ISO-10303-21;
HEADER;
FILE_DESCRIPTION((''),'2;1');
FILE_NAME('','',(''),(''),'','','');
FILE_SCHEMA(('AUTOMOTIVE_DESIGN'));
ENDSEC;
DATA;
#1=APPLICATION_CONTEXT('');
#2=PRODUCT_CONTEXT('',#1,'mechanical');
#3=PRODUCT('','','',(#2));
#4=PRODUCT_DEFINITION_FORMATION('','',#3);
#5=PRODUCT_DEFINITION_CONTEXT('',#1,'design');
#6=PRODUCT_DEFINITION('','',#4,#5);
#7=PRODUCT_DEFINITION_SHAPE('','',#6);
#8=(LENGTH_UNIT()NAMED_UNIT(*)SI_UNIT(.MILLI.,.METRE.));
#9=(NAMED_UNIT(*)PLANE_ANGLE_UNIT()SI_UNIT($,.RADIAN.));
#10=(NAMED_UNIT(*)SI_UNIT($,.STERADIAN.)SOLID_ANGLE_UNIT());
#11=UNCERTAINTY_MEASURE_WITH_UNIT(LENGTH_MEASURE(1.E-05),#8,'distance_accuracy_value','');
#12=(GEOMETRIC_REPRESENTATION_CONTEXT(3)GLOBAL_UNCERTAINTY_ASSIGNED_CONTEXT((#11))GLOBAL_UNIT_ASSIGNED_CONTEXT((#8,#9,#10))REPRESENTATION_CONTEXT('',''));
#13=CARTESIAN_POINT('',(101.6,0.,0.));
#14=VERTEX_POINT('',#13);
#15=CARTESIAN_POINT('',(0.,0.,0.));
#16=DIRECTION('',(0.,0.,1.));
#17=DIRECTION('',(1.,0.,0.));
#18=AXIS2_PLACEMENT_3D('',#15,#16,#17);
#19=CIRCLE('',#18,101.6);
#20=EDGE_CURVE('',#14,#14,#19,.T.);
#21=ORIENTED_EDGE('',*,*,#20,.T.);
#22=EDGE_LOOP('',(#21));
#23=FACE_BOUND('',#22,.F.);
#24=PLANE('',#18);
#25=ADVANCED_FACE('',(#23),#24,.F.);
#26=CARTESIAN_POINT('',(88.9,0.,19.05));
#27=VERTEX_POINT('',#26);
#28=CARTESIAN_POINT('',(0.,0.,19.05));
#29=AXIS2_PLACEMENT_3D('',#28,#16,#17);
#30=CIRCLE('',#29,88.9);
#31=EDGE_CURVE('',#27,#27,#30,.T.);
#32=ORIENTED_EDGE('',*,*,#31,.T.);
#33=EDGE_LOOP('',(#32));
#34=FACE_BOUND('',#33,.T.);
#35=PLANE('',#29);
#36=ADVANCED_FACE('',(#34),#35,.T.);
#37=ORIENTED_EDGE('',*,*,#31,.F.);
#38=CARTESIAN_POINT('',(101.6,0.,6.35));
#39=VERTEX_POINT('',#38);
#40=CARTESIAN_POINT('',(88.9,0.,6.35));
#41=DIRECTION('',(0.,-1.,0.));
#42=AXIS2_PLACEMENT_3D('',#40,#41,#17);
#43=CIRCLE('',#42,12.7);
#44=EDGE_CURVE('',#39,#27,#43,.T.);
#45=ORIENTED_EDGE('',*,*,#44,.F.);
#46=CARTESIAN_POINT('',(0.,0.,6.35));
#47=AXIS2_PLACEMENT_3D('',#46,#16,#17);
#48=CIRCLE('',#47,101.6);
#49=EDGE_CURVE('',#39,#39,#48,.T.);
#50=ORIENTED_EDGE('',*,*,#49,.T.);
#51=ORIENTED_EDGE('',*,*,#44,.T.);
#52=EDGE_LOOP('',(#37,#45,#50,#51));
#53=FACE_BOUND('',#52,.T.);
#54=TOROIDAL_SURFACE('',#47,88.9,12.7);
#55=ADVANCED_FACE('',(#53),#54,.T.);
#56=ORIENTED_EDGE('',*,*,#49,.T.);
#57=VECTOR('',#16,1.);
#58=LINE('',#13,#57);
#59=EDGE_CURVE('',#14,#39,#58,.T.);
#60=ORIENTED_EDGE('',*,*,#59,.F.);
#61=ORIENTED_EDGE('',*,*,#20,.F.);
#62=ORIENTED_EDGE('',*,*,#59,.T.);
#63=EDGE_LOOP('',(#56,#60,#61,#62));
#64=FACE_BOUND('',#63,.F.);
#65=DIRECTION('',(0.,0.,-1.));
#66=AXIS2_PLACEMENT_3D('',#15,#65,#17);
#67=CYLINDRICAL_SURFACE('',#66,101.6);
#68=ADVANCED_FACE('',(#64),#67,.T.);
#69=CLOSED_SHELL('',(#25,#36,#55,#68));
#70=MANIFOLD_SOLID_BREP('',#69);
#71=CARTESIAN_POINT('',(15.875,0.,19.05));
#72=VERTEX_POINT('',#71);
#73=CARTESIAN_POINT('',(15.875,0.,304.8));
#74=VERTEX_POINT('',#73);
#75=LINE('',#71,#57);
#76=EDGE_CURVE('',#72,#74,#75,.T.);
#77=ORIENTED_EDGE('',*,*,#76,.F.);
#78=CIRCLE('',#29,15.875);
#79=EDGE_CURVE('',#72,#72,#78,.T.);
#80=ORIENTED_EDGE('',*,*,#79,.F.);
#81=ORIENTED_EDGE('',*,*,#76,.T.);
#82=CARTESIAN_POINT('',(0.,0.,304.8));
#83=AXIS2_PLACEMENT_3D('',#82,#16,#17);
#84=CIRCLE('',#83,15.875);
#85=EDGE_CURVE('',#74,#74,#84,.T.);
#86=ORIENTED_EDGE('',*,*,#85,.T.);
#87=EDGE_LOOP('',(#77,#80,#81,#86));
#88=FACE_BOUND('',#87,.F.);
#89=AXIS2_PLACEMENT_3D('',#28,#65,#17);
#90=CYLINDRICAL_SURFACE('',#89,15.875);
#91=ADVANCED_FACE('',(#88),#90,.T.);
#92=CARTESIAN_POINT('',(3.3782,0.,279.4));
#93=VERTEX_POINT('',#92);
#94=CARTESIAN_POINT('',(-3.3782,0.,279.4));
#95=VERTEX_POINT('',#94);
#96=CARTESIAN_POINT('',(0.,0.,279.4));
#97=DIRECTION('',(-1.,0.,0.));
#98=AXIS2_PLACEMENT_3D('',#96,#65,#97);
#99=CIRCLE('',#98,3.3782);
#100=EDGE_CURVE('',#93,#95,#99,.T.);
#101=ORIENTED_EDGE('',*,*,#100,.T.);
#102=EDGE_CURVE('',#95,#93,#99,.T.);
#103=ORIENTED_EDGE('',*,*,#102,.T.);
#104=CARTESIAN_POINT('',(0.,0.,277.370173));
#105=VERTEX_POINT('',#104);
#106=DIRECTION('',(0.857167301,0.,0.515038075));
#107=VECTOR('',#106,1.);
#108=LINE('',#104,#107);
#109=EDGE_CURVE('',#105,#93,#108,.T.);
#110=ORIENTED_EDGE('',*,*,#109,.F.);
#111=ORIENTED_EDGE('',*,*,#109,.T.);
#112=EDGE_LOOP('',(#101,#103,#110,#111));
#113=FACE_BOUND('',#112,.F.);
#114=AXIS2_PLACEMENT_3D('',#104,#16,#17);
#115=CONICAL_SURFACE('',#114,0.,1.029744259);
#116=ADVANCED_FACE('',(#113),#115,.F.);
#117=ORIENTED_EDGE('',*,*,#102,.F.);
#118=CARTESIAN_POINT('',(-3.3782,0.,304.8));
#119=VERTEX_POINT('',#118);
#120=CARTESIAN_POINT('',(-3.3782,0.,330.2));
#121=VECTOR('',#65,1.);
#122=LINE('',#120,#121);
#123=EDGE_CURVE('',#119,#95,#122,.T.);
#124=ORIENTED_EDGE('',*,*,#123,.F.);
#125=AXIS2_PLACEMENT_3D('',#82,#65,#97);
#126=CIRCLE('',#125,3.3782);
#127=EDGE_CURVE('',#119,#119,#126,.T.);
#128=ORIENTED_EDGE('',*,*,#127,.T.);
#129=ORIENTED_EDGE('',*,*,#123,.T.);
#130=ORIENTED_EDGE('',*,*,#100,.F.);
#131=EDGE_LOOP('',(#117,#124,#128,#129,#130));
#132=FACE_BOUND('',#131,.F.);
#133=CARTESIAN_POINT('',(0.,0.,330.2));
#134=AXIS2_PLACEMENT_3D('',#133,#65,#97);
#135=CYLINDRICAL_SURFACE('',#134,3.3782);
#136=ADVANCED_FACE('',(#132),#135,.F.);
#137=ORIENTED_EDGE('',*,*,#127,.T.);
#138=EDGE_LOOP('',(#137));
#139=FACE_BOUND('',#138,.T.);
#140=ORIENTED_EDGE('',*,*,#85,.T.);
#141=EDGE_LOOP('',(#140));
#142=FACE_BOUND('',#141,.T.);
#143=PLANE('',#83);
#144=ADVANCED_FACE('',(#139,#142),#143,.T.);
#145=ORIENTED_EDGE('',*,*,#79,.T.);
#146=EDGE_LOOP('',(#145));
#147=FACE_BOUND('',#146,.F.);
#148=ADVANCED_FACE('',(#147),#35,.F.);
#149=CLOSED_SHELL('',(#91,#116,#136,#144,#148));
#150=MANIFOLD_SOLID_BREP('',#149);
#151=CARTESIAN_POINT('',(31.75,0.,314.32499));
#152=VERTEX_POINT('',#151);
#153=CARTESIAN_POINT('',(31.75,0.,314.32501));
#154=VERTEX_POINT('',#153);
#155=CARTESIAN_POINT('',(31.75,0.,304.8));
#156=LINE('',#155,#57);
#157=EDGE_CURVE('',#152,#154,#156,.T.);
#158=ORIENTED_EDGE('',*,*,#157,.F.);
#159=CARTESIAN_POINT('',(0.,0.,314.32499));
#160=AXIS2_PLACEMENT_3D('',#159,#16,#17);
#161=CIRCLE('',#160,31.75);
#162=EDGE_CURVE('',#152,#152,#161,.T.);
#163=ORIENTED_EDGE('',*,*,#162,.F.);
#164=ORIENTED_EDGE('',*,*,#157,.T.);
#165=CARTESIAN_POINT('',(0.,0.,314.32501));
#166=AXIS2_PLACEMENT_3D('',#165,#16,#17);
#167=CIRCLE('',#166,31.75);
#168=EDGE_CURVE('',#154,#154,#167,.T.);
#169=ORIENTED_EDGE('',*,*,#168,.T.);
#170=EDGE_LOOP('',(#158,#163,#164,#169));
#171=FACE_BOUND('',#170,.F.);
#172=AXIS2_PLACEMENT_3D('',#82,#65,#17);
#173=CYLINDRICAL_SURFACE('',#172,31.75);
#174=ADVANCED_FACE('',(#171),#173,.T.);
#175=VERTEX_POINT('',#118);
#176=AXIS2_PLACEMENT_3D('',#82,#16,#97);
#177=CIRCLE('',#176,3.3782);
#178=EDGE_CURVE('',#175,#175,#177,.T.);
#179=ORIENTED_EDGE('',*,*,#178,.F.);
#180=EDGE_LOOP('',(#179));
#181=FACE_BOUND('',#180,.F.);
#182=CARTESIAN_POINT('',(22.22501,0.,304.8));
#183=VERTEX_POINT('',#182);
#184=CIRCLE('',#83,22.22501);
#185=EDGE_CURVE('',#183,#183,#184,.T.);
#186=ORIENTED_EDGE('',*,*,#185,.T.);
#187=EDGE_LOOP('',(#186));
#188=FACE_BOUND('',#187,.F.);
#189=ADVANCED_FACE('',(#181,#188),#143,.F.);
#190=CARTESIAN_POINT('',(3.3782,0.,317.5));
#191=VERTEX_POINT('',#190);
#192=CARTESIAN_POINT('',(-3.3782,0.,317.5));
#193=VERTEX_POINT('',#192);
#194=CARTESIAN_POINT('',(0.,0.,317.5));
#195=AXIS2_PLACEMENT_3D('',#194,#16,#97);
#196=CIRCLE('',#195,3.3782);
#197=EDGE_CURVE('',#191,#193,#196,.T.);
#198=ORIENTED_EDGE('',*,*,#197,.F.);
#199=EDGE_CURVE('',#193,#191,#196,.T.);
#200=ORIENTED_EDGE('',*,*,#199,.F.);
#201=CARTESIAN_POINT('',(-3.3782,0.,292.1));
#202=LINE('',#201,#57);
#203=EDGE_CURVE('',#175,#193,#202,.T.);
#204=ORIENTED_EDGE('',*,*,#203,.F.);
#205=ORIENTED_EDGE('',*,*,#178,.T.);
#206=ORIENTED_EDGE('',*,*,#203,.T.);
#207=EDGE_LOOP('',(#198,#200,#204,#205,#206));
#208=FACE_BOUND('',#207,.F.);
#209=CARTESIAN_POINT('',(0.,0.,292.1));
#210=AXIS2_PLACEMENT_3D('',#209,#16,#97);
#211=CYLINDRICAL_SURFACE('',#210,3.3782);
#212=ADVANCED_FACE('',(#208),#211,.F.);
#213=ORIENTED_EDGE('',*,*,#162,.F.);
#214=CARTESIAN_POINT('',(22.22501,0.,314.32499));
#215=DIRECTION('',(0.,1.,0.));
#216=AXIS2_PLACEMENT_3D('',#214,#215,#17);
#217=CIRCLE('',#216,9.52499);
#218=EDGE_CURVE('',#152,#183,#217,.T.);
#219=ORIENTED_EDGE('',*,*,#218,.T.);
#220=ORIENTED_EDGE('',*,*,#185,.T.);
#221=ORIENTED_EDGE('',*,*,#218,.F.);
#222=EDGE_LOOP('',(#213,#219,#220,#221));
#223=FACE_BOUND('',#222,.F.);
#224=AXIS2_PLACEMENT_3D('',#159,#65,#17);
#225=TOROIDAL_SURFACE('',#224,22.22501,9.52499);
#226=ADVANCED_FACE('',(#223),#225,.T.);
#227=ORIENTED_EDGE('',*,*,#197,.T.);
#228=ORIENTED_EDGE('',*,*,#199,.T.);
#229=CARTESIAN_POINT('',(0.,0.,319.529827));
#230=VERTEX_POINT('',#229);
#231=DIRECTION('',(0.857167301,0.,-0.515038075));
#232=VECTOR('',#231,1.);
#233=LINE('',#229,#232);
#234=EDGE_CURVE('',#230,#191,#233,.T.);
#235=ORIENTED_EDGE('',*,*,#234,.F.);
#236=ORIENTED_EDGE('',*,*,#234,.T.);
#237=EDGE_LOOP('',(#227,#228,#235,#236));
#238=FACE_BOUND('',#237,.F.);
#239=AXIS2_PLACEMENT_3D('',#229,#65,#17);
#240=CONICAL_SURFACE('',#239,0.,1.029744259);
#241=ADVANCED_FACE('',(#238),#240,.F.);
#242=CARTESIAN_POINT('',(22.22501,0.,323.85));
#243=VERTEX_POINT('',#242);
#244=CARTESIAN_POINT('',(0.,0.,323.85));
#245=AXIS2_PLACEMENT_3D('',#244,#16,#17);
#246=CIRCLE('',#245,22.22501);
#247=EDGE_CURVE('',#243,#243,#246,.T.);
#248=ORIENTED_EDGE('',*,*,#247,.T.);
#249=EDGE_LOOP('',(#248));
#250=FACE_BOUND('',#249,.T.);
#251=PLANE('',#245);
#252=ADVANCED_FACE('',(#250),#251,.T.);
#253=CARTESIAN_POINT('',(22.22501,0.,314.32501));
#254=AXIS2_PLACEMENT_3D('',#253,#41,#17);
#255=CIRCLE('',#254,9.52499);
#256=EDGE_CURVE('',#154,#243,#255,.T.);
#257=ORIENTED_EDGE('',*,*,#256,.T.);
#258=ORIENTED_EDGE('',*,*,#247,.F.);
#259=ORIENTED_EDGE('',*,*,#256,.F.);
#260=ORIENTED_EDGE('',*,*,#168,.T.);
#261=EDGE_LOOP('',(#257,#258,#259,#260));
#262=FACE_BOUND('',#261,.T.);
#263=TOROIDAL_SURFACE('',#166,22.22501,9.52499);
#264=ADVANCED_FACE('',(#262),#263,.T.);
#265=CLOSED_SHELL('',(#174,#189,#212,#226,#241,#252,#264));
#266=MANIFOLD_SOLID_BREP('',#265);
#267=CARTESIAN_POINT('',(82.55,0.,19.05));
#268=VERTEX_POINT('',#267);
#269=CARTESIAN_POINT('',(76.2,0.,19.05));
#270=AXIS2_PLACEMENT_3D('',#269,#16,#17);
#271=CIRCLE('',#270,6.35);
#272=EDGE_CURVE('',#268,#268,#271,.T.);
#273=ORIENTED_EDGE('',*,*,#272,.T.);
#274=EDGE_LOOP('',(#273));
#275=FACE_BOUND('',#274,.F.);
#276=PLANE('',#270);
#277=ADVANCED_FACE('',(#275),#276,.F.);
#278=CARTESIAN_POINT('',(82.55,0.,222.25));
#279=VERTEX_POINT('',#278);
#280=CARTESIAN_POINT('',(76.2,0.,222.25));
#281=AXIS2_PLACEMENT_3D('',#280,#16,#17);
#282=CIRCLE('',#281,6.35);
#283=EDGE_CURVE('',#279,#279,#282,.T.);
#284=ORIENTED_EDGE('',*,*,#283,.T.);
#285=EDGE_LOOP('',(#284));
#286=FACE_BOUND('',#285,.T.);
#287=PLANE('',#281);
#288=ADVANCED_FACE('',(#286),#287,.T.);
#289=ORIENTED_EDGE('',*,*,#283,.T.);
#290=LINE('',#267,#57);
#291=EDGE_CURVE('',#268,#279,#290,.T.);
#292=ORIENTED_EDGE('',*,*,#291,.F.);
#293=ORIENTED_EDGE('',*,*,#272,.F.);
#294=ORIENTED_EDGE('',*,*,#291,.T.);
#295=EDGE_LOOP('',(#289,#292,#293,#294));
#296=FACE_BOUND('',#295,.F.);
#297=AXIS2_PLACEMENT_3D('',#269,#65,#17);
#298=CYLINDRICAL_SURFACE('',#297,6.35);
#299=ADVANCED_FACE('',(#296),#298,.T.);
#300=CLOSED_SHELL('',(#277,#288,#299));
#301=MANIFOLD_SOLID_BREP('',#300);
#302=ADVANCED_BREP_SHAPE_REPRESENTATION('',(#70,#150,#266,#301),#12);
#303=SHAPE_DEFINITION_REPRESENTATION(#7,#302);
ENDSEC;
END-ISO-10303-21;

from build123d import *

# Parameters (mm, degrees)
F0_R      = 101.6
F1_DEPTH  = 19.05
F2_R      = 12.7
F3_R      = 15.875
F4_DEPTH  = 285.75
F3_R_2    = 6.35
F5_DEPTH  = 203.2
F6_R      = 31.75
F7_DEPTH  = 19.05
F8_R      = 9.52499
F9_D      = 6.7564
F9_DEPTH  = 25.4
F9_TIP    = 2.0298273432
F10_D     = 6.7564
F10_DEPTH = 12.7
F10_TIP   = 2.0298273432


# Not quite as in the source:
# - a fillet or chamfer is up to 0.001 mm smaller than in the source, because OpenCascade refuses the exact size


with BuildPart() as f1:
    # F0 (on Top) → F1 (new body)
    with BuildSketch(Plane.XY):
        Circle(F0_R)
    extrude(amount=F1_DEPTH)

    # F2
    f2_edges = [f1.edges().sort_by_distance(p)[0] for p in [
        (-101.6, 0, 19.05),
    ]]
    fillet(f2_edges, radius=F2_R)


with BuildPart() as f4:
    # F3 (on face) → F4 (new body)
    with BuildSketch(Plane.XY.offset(19.05)):
        Circle(F3_R)
    extrude(amount=F4_DEPTH)

    # F9
    with Locations(Plane.XY.offset(304.8)):
        with Locations((0, 0)):
            Hole(F9_D / 2, depth=F9_DEPTH)
            with Locations((0, 0, -(F9_DEPTH + F9_TIP / 2))):  # 118° drill point
                Cone(0, F9_D / 2, F9_TIP, mode=Mode.SUBTRACT)


with BuildPart() as f5:
    # F3 (on face) → F5 (new body)
    with BuildSketch(Plane.XY.offset(19.05)):
        with Locations((76.2, 0)):
            Circle(F3_R_2)
    extrude(amount=F5_DEPTH)


with BuildPart() as f7:
    # F6 (on face) → F7 (new body)
    with BuildSketch(Plane.XY.offset(304.8)):
        Circle(F6_R)
    extrude(amount=F7_DEPTH)

    # F8 (radius 9.525 in the source; OpenCascade refuses exactly that, so slightly less here)
    f8_edges = [f7.edges().sort_by_distance(p)[0] for p in [
        (-31.75, 0, 323.85),
        (-31.75, 0, 304.8),
    ]]
    fillet(f8_edges, radius=F8_R)

    # F10
    with Locations(Plane(origin=(0, 0, 304.8), x_dir=(1, 0, 0), z_dir=(0, 0, -1))):
        with Locations((0, 0)):
            Hole(F10_D / 2, depth=F10_DEPTH)
            with Locations((0, 0, -(F10_DEPTH + F10_TIP / 2))):  # 118° drill point
                Cone(0, F10_D / 2, F10_TIP, mode=Mode.SUBTRACT)


solid = Compound([f1.part, f4.part, f5.part, f7.part])
